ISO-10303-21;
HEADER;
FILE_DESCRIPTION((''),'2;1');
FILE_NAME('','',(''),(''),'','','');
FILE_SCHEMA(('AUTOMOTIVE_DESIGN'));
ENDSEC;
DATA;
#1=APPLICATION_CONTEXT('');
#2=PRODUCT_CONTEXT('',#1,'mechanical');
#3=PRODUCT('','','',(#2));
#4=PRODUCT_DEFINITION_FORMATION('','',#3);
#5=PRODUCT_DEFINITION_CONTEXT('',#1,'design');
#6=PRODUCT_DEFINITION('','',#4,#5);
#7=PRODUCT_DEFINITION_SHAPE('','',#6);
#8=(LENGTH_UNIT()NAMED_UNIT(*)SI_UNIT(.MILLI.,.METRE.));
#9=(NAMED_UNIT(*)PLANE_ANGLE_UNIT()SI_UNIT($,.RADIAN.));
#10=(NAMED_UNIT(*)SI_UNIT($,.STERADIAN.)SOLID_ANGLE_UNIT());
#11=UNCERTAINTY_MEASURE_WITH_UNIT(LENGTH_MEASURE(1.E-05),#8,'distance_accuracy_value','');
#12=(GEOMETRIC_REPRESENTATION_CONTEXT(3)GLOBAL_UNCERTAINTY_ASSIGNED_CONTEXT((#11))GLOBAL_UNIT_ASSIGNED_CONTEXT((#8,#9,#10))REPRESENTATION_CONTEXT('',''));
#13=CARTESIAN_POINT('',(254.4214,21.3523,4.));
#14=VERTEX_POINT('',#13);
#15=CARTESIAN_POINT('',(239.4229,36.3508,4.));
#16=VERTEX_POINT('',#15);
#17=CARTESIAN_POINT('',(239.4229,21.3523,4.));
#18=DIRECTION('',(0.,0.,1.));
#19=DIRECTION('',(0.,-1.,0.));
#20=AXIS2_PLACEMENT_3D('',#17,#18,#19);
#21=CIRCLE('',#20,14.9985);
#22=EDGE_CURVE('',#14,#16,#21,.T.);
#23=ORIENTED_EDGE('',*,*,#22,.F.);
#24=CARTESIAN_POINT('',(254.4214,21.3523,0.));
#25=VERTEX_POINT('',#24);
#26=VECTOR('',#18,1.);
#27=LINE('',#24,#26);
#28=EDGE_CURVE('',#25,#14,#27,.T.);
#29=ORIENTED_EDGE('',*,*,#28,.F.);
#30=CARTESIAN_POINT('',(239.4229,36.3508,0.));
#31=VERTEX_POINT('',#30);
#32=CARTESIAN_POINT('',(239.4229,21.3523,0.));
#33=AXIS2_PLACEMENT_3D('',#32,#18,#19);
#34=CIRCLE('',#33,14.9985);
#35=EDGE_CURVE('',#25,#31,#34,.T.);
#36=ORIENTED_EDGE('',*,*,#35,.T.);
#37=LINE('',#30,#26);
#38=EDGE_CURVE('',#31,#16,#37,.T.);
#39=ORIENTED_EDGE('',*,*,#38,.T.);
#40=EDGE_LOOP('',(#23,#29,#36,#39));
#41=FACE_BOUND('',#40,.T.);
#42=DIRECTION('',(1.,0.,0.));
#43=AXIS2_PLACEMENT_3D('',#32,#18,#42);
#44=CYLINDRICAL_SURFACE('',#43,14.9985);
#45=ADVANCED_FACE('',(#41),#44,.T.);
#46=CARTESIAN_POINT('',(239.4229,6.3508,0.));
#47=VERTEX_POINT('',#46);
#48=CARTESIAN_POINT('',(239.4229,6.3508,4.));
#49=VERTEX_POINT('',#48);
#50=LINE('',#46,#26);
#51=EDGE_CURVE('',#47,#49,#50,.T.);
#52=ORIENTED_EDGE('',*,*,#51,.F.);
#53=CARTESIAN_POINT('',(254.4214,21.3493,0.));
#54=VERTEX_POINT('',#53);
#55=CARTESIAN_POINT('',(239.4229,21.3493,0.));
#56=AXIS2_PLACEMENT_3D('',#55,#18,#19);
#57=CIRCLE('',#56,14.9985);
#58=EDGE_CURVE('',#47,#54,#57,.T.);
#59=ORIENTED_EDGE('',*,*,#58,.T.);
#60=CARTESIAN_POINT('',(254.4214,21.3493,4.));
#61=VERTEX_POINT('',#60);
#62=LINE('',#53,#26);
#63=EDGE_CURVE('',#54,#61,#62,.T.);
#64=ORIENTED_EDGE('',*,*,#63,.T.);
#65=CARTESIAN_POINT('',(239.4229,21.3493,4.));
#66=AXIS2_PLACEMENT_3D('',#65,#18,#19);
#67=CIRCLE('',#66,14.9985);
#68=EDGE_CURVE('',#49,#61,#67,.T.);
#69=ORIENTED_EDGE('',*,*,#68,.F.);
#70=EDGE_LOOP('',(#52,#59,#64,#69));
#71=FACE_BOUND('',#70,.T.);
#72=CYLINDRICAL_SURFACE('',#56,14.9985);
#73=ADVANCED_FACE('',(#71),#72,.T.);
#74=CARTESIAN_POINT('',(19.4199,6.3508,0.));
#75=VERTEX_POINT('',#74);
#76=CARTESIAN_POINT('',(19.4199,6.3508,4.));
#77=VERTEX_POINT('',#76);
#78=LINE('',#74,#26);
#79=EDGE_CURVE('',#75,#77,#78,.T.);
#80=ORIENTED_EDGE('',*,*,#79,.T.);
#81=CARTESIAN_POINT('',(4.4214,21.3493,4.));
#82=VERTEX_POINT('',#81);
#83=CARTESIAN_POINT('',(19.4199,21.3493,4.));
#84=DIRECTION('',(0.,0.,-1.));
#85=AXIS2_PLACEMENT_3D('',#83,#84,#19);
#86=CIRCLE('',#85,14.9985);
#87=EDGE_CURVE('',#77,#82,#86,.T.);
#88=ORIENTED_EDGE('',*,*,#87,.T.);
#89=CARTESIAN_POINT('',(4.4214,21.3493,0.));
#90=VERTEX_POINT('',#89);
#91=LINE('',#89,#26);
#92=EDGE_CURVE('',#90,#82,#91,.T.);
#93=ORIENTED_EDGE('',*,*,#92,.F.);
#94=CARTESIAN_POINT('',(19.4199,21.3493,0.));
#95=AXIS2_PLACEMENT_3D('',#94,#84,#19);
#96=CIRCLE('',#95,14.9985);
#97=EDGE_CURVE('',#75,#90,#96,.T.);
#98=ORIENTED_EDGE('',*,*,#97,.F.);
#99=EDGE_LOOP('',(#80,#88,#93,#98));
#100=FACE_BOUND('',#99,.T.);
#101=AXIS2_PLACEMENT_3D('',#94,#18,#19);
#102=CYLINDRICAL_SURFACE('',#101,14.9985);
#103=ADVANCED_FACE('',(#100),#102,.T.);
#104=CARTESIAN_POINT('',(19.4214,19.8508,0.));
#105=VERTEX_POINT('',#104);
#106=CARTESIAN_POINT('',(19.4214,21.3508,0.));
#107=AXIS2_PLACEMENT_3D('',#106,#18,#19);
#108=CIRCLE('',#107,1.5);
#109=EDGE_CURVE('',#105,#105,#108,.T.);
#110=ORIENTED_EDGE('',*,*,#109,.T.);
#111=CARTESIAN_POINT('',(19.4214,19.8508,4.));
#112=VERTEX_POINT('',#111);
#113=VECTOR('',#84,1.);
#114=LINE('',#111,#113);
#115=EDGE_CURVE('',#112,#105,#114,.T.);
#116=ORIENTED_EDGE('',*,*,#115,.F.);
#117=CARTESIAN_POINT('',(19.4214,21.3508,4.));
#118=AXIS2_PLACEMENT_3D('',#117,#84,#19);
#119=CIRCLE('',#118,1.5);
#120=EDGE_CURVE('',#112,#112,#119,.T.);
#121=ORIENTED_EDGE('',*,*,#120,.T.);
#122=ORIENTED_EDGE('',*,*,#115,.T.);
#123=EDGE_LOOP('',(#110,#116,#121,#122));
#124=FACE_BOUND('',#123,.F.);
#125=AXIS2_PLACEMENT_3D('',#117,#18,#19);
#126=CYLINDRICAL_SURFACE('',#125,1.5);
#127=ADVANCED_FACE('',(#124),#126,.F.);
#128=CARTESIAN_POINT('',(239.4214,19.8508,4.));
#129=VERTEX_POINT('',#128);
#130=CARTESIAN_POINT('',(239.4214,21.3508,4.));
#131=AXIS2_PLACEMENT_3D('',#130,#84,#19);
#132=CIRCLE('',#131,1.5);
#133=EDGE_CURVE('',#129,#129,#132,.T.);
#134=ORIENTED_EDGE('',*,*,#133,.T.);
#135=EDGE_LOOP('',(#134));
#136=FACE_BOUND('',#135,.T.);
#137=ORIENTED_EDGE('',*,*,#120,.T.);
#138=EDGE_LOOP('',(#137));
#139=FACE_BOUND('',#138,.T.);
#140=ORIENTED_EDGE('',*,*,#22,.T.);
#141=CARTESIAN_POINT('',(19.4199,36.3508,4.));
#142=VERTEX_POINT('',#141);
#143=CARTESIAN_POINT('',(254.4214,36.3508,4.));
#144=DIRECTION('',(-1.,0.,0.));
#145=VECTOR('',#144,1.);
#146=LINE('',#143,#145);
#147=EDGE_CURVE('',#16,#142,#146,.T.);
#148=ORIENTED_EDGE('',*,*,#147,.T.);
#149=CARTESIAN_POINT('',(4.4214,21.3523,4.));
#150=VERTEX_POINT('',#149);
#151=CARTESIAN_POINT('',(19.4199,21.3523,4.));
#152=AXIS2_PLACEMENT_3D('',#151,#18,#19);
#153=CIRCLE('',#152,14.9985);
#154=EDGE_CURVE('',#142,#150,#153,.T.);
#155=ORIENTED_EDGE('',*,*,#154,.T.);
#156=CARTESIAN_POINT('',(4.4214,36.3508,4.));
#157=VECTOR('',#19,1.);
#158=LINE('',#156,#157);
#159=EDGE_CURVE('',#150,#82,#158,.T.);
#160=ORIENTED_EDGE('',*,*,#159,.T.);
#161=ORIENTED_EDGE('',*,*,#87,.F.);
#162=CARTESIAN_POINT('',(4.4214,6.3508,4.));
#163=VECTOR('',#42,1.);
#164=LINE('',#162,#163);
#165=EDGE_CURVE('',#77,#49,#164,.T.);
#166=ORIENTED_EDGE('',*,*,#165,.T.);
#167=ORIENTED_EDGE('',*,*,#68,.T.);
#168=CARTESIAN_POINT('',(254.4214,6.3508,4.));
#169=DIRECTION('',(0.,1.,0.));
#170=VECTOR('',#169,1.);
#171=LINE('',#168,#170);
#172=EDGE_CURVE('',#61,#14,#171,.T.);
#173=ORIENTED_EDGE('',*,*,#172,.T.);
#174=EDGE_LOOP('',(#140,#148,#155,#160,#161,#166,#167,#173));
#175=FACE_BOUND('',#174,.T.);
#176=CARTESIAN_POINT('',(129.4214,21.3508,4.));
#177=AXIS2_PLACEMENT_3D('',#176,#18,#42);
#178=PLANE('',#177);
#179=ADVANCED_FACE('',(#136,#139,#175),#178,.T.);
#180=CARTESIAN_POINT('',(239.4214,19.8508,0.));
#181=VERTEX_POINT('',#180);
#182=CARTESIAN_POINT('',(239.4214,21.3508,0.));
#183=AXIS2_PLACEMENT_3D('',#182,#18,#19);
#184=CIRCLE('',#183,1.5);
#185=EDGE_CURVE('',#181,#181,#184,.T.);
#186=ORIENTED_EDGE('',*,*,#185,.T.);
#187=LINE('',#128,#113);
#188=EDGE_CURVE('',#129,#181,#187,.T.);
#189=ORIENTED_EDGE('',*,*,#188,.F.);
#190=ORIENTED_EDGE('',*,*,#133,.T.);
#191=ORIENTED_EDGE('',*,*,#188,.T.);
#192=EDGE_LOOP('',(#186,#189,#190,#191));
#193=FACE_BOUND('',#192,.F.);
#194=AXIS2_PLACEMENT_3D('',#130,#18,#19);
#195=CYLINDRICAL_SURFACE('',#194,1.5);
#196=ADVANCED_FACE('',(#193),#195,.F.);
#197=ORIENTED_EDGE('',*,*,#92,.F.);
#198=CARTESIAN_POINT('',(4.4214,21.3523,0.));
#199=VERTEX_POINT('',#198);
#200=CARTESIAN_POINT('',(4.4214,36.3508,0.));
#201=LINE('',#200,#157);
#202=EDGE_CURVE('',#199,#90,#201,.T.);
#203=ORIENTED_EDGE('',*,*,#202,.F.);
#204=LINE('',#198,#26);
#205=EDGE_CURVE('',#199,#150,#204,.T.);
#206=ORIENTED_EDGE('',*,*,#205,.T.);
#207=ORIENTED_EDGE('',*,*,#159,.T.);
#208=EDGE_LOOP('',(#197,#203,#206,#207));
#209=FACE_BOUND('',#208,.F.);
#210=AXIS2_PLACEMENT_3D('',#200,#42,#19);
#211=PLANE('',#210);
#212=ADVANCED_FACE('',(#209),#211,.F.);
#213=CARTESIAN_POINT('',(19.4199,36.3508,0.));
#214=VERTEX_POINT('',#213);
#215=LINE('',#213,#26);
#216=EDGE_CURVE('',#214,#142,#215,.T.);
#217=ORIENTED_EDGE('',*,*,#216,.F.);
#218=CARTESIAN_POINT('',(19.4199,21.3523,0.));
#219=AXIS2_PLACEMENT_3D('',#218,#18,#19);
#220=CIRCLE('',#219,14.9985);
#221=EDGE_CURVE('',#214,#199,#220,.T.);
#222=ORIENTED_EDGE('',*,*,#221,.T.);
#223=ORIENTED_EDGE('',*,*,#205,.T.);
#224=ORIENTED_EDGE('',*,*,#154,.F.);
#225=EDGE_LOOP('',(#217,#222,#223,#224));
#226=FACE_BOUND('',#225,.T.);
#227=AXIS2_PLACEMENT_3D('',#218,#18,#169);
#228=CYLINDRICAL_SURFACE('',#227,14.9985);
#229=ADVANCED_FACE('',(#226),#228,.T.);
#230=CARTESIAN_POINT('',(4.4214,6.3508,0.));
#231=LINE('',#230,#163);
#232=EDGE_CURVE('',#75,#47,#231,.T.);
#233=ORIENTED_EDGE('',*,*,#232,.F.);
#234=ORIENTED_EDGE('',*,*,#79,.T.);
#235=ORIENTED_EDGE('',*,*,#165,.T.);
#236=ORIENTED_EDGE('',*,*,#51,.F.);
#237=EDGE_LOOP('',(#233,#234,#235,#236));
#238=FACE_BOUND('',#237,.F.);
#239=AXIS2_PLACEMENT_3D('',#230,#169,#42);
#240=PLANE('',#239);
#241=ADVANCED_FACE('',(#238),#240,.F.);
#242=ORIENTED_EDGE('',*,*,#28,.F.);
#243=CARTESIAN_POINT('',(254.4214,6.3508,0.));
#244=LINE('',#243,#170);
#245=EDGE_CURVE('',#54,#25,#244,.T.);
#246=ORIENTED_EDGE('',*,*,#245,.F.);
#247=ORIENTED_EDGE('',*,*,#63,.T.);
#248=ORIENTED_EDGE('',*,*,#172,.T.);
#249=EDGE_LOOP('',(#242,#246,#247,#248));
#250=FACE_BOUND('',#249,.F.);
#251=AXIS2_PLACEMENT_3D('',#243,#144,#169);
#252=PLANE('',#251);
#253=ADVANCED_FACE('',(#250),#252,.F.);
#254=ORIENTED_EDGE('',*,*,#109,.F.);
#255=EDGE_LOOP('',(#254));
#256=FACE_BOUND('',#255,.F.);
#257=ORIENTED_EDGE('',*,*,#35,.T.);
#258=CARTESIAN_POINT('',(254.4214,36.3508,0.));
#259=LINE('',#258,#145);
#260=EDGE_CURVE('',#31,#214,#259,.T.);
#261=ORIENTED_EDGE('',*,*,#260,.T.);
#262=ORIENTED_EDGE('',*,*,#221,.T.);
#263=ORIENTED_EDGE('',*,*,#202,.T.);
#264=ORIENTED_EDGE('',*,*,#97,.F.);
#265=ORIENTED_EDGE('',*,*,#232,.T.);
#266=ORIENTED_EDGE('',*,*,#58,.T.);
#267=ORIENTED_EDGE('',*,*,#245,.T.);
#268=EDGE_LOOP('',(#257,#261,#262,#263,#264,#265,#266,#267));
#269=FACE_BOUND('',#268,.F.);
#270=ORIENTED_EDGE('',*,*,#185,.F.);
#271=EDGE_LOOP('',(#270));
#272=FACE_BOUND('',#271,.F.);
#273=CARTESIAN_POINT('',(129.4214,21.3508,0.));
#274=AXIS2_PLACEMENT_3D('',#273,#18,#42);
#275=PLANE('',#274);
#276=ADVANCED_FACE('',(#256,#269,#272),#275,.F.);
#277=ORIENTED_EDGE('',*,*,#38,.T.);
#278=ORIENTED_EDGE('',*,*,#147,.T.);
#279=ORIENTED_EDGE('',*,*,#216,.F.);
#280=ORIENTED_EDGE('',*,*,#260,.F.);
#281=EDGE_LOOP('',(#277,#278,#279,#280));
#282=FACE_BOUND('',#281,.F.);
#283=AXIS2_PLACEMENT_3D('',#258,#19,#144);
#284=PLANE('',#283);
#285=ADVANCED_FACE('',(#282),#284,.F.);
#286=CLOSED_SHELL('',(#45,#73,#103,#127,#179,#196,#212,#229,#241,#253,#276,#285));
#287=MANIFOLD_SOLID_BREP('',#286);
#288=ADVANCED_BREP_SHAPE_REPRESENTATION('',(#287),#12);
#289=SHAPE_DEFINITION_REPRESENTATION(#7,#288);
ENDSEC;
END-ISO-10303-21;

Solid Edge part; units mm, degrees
sketch "Sketch1" plane through (0, 0, 0) normal (0, 0, 1) x (1, 0, 0)
  line L0 (4.4214, 6.3508) -> (254.4214, 6.3508)
  line L1 (254.4214, 6.3508) -> (254.4214, 36.3508)
  line L2 (254.4214, 36.3508) -> (4.4214, 36.3508)
  line L3 (4.4214, 36.3508) -> (4.4214, 6.3508)
extrude "Protrusion1" add sketch "Sketch1" along normal blind 4
fillet "Redondo_1" radius 15 4 edges at (254.4214, 6.3508, 2) (254.4214, 36.3508, 2) (4.4214, 6.3508, 2) (4.4214, 36.3508, 2)
hole "Furo_8" at (19.4214, 21.3508, 4) direction (0, 0, -1) diameter 3 end up to next
hole "Hole1" at (239.4214, 21.3508, 4) direction (0, 0, -1) diameter 3 end up to next
